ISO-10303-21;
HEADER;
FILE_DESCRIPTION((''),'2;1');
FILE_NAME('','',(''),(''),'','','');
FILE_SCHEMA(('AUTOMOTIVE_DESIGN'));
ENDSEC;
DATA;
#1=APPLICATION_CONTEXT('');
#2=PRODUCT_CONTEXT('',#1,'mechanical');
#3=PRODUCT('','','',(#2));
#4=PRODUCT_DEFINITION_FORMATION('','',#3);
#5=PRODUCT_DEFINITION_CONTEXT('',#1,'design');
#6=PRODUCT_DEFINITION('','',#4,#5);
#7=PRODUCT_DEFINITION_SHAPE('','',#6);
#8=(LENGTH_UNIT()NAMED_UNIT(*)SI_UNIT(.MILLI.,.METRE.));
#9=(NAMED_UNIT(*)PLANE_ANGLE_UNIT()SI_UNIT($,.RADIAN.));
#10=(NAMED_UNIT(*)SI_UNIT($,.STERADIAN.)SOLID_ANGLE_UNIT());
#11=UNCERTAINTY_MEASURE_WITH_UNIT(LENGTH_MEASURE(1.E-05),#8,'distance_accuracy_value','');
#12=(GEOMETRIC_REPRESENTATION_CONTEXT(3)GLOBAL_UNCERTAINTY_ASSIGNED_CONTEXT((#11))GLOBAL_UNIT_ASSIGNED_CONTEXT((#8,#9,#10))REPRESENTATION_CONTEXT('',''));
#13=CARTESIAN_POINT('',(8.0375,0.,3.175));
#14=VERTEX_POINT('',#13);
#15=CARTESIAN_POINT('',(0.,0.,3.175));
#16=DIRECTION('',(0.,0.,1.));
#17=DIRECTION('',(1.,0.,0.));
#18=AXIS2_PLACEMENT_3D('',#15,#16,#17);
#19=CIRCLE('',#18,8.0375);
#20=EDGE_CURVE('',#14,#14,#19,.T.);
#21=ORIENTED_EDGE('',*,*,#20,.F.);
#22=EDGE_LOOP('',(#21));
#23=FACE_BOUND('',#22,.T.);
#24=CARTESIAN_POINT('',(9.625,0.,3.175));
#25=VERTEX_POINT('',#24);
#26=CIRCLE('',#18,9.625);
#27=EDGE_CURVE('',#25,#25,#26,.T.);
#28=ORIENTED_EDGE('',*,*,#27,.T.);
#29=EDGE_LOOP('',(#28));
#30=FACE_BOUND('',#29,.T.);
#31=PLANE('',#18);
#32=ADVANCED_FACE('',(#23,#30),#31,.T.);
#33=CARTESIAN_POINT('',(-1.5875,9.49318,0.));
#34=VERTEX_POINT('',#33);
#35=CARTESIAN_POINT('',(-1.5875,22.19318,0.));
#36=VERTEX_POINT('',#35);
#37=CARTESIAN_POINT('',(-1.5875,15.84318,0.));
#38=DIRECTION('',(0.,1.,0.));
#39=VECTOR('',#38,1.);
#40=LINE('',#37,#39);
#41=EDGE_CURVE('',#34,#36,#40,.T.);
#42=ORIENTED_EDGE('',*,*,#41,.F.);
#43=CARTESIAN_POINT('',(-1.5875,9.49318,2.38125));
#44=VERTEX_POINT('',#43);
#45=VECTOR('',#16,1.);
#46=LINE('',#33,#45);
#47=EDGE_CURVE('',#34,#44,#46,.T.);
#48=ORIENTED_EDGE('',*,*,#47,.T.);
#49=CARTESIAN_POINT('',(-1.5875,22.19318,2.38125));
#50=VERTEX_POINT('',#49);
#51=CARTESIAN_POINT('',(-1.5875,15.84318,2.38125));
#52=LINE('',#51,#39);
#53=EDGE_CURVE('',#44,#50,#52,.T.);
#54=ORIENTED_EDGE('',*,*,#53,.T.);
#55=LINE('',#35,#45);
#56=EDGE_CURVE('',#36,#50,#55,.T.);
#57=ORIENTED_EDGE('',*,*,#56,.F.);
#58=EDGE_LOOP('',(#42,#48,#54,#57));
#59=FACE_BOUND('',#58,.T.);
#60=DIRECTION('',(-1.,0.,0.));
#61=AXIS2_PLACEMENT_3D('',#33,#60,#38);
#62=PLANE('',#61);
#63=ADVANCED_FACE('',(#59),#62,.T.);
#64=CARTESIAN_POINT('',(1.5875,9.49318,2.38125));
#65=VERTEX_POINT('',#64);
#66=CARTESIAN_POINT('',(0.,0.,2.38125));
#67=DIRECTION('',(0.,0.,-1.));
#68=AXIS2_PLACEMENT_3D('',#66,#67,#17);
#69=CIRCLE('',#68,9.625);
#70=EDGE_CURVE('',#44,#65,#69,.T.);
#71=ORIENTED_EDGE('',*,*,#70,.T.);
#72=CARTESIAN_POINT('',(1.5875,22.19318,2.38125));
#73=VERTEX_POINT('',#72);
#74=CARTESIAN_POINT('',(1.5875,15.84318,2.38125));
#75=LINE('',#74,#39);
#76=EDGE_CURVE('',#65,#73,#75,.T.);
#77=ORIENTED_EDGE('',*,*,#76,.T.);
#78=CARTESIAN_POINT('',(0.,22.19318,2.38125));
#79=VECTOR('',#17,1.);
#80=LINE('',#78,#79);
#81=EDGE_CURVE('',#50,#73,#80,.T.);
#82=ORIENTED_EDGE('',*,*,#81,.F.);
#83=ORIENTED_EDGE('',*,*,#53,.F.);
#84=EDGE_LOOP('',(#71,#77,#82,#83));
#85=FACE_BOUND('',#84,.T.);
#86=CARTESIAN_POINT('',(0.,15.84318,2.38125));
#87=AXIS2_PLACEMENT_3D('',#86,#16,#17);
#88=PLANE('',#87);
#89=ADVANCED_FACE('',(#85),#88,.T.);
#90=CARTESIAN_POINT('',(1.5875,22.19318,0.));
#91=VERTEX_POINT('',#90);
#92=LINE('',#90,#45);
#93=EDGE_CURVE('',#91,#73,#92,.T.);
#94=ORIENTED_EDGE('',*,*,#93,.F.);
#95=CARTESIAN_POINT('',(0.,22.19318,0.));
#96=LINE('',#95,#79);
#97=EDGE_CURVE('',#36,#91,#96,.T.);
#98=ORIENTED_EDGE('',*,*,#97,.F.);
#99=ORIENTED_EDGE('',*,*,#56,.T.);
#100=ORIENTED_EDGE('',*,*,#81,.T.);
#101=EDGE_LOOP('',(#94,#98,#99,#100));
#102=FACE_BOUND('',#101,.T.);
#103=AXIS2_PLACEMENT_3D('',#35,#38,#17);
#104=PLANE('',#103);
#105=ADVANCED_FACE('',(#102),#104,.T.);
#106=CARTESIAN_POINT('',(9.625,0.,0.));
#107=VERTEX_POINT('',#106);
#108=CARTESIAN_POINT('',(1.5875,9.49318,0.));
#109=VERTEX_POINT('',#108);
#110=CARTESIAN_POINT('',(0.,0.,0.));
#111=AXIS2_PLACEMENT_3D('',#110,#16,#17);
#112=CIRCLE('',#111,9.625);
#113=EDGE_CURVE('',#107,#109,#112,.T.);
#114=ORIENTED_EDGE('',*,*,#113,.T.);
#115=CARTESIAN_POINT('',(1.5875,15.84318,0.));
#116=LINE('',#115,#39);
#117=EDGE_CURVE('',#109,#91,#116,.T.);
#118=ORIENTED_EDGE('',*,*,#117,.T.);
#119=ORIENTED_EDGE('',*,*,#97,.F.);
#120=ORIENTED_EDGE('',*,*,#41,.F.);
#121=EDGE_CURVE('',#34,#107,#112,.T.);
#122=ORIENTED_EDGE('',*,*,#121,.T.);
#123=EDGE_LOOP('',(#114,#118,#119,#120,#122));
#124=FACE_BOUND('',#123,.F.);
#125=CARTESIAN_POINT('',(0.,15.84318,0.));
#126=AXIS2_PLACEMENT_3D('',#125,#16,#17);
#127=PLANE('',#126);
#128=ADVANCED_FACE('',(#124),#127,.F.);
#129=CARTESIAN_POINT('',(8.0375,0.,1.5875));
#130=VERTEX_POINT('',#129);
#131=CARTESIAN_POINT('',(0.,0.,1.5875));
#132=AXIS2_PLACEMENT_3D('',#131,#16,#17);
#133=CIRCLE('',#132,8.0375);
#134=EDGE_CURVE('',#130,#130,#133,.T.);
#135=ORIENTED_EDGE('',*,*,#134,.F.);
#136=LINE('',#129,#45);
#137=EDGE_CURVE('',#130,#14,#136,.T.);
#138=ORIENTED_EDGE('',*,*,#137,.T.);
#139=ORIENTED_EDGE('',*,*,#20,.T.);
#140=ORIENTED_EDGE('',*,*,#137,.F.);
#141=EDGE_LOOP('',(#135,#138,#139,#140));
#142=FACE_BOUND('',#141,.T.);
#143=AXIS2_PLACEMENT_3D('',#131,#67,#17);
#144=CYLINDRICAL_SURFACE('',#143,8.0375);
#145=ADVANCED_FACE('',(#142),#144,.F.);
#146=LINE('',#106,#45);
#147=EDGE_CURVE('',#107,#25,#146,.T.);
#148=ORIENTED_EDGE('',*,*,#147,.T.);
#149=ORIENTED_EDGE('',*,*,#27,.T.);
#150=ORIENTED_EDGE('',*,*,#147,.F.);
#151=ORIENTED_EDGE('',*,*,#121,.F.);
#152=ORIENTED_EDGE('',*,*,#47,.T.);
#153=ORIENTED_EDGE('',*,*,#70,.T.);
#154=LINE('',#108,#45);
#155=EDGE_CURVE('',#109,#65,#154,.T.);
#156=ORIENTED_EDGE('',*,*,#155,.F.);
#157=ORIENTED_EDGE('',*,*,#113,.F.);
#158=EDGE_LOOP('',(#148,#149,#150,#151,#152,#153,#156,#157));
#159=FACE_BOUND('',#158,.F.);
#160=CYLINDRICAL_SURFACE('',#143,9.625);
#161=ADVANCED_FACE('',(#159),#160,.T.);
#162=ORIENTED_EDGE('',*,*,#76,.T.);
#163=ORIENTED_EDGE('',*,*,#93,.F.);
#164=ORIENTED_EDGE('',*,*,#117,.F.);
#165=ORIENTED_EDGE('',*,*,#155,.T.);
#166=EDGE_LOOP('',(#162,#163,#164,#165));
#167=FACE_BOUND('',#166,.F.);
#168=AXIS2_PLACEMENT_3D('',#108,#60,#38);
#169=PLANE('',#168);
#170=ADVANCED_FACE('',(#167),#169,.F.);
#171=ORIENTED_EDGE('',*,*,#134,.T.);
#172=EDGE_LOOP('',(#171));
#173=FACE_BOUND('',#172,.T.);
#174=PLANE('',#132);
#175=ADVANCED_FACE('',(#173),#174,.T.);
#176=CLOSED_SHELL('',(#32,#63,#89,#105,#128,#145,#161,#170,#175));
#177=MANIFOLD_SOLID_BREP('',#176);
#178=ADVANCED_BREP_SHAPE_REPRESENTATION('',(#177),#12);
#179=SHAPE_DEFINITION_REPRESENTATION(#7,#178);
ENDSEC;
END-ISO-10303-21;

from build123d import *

# Parameters (mm, degrees)
F0_R     = 9.625
F1_DEPTH = 1.5875
F2_R     = 9.625
F2_R_2   = 8.0375
F3_DEPTH = 1.5875
F4_W     = 3.175
F4_H     = 12.7
F5_DEPTH = 2.38125


with BuildPart() as f1:
    # F0 (on Top) → F1 (new body)
    with BuildSketch(Plane.XY):
        Circle(F0_R)
    extrude(amount=F1_DEPTH)

    # F2 (on face) → F3 (join)
    with BuildSketch(Plane.XY.offset(1.5875)):
        Circle(F2_R)
        Circle(F2_R_2, mode=Mode.SUBTRACT)
    extrude(amount=F3_DEPTH)

    # F4 (on Top) → F5 (join)
    with BuildSketch(Plane.XY):
        with Locations((0, 15.8431801179)):
            Rectangle(F4_W, F4_H)
    extrude(amount=F5_DEPTH)


solid = f1.part
